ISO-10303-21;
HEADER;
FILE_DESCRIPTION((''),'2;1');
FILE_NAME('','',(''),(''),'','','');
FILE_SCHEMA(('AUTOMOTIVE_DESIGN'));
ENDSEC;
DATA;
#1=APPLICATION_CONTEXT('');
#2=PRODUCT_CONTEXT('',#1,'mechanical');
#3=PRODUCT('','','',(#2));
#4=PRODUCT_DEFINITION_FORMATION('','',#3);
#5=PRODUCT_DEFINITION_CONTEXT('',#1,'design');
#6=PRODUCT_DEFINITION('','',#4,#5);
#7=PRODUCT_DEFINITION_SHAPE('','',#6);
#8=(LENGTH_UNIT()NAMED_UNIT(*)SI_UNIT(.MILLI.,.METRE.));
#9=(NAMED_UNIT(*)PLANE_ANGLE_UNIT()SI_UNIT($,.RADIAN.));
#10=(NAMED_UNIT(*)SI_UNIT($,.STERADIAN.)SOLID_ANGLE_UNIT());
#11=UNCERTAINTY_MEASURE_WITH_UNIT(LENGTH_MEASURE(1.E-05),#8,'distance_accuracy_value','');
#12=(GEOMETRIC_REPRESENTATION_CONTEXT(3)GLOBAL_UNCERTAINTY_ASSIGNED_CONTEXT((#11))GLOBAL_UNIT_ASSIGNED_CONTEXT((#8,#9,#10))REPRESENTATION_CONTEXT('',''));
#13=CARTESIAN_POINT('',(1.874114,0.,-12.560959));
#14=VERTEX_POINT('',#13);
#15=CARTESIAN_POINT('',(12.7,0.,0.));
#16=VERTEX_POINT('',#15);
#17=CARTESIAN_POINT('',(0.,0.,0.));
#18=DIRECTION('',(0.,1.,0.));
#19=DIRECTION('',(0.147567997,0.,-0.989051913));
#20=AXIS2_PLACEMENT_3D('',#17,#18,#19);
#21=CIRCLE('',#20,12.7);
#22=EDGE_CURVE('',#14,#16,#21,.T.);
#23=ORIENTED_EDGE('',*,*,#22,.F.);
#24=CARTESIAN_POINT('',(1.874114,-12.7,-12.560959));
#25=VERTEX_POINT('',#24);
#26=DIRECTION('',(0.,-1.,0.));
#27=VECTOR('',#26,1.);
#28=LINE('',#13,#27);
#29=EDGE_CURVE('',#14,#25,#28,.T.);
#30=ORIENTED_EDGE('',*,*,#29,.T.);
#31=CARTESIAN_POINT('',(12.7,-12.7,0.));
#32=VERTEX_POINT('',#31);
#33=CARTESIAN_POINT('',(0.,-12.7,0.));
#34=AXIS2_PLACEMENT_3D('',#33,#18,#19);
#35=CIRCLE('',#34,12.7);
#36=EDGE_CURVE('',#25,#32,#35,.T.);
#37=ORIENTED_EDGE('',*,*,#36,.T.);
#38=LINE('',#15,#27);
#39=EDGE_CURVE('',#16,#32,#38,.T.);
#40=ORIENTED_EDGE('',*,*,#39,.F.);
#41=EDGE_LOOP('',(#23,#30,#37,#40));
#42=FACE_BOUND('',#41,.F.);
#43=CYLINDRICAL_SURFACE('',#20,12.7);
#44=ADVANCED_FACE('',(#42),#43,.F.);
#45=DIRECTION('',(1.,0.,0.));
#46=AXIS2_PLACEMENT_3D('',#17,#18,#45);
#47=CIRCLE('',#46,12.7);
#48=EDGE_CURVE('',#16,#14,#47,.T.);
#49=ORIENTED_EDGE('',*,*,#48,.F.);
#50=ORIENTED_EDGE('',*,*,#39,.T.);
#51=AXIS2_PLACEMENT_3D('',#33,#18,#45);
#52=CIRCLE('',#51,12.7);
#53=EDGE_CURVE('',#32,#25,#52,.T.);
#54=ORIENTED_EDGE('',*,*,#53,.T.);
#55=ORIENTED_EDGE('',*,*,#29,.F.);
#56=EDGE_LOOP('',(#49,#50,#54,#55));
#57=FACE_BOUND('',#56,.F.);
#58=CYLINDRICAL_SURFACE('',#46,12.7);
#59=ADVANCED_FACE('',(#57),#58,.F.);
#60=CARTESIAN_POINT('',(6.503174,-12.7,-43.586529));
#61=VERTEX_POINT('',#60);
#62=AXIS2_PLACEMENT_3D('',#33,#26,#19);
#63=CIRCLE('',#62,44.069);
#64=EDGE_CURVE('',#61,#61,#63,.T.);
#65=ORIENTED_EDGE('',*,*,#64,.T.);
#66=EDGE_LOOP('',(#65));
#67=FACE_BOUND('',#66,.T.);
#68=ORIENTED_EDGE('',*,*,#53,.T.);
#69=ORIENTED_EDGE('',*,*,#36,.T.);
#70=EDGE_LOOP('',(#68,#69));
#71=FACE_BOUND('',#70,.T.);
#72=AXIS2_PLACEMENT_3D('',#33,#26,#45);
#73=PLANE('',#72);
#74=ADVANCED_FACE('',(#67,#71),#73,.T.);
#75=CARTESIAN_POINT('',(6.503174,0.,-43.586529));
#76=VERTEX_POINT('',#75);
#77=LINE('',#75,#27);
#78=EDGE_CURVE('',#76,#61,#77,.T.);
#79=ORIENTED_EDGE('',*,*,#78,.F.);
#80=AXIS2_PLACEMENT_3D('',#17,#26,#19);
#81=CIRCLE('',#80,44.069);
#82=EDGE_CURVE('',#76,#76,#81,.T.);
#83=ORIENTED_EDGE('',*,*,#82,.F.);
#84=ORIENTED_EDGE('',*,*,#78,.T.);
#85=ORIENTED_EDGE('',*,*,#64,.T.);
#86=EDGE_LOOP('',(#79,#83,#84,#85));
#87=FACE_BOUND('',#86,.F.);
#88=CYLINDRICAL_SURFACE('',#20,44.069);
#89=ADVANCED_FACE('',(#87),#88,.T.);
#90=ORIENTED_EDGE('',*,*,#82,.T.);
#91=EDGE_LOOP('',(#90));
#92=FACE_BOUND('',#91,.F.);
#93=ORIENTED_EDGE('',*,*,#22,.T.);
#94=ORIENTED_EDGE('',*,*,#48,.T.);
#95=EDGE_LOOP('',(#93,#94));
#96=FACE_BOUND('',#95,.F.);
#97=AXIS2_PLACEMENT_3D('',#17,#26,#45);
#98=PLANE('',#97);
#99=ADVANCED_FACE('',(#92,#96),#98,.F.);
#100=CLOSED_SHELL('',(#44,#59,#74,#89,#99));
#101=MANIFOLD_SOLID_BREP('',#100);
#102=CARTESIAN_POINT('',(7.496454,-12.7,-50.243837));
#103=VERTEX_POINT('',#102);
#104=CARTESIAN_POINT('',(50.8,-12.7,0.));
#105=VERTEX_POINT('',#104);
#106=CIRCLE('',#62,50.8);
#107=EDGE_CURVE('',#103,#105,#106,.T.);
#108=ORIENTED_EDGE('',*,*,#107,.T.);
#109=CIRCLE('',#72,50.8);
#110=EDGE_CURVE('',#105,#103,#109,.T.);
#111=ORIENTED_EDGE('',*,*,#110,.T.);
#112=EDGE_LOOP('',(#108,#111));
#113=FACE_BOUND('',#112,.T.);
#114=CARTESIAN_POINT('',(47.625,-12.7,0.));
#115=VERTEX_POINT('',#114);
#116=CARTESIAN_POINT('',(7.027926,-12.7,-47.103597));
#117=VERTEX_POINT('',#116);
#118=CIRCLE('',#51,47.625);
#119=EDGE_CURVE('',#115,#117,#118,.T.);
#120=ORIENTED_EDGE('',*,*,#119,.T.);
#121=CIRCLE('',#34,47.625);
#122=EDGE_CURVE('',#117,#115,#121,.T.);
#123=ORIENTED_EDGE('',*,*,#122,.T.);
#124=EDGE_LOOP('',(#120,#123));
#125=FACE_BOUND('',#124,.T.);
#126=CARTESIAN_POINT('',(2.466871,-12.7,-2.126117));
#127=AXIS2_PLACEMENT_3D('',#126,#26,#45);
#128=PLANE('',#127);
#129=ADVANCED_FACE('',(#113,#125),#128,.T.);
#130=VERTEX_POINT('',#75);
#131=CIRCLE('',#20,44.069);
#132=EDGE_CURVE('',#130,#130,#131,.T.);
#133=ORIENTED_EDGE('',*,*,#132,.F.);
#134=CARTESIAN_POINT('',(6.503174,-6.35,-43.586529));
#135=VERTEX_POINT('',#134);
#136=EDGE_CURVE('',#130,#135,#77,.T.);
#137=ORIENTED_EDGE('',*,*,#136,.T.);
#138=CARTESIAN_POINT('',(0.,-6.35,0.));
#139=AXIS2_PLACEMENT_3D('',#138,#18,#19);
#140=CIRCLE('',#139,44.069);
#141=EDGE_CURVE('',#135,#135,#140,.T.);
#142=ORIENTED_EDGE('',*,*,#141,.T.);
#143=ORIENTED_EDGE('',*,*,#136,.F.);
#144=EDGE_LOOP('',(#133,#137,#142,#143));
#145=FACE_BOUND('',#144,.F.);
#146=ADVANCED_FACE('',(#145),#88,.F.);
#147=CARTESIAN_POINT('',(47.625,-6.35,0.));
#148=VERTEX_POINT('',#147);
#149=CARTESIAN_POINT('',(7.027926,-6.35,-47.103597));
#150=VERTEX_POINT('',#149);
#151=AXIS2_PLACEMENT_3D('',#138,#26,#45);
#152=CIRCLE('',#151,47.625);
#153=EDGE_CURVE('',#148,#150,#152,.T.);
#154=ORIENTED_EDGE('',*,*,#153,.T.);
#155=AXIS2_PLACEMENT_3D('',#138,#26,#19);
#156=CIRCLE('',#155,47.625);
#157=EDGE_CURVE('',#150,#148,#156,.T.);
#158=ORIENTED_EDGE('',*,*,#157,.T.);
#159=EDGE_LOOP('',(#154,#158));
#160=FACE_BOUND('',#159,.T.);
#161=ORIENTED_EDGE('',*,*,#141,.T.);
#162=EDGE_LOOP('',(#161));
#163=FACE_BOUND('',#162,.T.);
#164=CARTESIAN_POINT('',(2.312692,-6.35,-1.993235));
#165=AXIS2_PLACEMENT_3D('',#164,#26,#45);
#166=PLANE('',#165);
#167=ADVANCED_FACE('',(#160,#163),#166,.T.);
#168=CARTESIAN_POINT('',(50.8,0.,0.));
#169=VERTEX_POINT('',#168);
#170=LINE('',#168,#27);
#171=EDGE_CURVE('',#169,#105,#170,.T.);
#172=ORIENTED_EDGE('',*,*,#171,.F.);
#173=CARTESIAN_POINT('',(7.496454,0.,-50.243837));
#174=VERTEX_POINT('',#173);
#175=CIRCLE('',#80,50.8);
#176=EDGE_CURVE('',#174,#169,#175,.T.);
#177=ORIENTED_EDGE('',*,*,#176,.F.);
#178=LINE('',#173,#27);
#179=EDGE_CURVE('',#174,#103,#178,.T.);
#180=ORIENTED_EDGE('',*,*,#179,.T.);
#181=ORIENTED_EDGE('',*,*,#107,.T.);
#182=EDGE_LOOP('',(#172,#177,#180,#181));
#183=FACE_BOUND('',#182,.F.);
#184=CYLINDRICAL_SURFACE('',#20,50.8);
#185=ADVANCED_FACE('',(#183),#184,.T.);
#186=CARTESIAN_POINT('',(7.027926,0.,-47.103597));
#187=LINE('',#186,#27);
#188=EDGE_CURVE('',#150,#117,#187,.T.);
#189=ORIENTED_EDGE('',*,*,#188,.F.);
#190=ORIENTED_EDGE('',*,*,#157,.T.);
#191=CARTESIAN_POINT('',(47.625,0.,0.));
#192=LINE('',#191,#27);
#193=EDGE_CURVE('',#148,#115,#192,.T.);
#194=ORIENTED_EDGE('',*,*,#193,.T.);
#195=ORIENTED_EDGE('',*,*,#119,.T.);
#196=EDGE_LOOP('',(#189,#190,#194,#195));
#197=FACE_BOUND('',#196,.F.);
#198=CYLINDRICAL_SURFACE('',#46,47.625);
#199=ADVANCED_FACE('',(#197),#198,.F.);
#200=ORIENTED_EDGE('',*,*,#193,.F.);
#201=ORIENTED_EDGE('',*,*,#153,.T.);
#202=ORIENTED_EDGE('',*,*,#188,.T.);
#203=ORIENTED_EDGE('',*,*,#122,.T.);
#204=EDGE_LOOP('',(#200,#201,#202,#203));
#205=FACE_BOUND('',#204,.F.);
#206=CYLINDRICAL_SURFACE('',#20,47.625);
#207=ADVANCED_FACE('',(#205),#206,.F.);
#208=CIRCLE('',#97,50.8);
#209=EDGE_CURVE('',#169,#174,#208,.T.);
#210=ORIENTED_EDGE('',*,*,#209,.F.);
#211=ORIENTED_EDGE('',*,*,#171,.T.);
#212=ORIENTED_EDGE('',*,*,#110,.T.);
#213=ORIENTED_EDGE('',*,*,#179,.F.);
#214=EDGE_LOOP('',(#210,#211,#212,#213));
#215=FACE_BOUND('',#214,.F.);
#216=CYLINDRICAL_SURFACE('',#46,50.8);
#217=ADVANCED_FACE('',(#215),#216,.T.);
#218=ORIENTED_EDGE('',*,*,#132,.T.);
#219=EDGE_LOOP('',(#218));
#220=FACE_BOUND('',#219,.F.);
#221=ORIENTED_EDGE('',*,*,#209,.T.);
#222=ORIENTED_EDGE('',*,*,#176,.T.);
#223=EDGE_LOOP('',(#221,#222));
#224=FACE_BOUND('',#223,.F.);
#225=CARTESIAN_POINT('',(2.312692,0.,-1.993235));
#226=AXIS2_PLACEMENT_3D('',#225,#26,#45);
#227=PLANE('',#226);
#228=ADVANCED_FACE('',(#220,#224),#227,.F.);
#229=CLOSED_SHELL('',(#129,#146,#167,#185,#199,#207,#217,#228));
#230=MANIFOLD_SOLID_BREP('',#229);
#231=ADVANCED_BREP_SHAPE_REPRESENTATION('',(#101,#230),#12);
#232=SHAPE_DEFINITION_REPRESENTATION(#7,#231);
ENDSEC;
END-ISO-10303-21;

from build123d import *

# Parameters (mm, degrees)
F1_DEPTH = 12.7
F2_DEPTH = 6.35


with BuildPart() as f1:
    # F0 (on Front) → F1 (new body)
    with BuildSketch(Plane.XZ):
        with BuildLine():
            ThreePointArc((7.4964542451, -50.2438371719), (38.480253869, -33.1648920121), (50.8, 0))
            ThreePointArc((50.8, 0), (-38.480253869, 33.1648920121), (7.4964542451, -50.2438371719))
        make_face()
        with BuildLine():
            ThreePointArc((47.625, 0), (36.0752380022, -31.0920862614), (7.0279258548, -47.1035973486))
            ThreePointArc((7.0279258548, -47.1035973486), (-36.0752380022, 31.0920862614), (47.625, 0))
        make_face(mode=Mode.SUBTRACT)
    extrude(amount=F1_DEPTH)

    # F0 (on Front) → F2 (join)
    with BuildSketch(Plane.XZ):
        with BuildLine():
            ThreePointArc((47.625, 0), (-36.0752380022, 31.0920862614), (7.0279258548, -47.1035973486))
            ThreePointArc((7.0279258548, -47.1035973486), (36.0752380022, -31.0920862614), (47.625, 0))
        make_face()
        with BuildLine():
            ThreePointArc((44.069, 0), (33.3816202314, -28.7705438205), (6.5031740576, -43.5865287466))
            ThreePointArc((6.5031740576, -43.5865287466), (-33.3816202314, 28.7705438205), (44.069, 0))
        make_face(mode=Mode.SUBTRACT)
    extrude(amount=F2_DEPTH)


with BuildPart() as f1b:
    # F0 (on Front) → F1, piece 2 (new body)
    with BuildSketch(Plane.XZ):
        with BuildLine():
            ThreePointArc((44.069, 0), (-33.3816202314, 28.7705438205), (6.5031740576, -43.5865287466))
            ThreePointArc((6.5031740576, -43.5865287466), (33.3816202314, -28.7705438205), (44.069, 0))
        make_face()
        with BuildLine():
            ThreePointArc((12.7, 0), (9.6200634673, -8.291223003), (1.8741135613, -12.560959293))
            ThreePointArc((1.8741135613, -12.560959293), (-9.6200634673, 8.291223003), (12.7, 0))
        make_face(mode=Mode.SUBTRACT)
    extrude(amount=F1_DEPTH)


solid = Compound([f1.part, f1b.part])
